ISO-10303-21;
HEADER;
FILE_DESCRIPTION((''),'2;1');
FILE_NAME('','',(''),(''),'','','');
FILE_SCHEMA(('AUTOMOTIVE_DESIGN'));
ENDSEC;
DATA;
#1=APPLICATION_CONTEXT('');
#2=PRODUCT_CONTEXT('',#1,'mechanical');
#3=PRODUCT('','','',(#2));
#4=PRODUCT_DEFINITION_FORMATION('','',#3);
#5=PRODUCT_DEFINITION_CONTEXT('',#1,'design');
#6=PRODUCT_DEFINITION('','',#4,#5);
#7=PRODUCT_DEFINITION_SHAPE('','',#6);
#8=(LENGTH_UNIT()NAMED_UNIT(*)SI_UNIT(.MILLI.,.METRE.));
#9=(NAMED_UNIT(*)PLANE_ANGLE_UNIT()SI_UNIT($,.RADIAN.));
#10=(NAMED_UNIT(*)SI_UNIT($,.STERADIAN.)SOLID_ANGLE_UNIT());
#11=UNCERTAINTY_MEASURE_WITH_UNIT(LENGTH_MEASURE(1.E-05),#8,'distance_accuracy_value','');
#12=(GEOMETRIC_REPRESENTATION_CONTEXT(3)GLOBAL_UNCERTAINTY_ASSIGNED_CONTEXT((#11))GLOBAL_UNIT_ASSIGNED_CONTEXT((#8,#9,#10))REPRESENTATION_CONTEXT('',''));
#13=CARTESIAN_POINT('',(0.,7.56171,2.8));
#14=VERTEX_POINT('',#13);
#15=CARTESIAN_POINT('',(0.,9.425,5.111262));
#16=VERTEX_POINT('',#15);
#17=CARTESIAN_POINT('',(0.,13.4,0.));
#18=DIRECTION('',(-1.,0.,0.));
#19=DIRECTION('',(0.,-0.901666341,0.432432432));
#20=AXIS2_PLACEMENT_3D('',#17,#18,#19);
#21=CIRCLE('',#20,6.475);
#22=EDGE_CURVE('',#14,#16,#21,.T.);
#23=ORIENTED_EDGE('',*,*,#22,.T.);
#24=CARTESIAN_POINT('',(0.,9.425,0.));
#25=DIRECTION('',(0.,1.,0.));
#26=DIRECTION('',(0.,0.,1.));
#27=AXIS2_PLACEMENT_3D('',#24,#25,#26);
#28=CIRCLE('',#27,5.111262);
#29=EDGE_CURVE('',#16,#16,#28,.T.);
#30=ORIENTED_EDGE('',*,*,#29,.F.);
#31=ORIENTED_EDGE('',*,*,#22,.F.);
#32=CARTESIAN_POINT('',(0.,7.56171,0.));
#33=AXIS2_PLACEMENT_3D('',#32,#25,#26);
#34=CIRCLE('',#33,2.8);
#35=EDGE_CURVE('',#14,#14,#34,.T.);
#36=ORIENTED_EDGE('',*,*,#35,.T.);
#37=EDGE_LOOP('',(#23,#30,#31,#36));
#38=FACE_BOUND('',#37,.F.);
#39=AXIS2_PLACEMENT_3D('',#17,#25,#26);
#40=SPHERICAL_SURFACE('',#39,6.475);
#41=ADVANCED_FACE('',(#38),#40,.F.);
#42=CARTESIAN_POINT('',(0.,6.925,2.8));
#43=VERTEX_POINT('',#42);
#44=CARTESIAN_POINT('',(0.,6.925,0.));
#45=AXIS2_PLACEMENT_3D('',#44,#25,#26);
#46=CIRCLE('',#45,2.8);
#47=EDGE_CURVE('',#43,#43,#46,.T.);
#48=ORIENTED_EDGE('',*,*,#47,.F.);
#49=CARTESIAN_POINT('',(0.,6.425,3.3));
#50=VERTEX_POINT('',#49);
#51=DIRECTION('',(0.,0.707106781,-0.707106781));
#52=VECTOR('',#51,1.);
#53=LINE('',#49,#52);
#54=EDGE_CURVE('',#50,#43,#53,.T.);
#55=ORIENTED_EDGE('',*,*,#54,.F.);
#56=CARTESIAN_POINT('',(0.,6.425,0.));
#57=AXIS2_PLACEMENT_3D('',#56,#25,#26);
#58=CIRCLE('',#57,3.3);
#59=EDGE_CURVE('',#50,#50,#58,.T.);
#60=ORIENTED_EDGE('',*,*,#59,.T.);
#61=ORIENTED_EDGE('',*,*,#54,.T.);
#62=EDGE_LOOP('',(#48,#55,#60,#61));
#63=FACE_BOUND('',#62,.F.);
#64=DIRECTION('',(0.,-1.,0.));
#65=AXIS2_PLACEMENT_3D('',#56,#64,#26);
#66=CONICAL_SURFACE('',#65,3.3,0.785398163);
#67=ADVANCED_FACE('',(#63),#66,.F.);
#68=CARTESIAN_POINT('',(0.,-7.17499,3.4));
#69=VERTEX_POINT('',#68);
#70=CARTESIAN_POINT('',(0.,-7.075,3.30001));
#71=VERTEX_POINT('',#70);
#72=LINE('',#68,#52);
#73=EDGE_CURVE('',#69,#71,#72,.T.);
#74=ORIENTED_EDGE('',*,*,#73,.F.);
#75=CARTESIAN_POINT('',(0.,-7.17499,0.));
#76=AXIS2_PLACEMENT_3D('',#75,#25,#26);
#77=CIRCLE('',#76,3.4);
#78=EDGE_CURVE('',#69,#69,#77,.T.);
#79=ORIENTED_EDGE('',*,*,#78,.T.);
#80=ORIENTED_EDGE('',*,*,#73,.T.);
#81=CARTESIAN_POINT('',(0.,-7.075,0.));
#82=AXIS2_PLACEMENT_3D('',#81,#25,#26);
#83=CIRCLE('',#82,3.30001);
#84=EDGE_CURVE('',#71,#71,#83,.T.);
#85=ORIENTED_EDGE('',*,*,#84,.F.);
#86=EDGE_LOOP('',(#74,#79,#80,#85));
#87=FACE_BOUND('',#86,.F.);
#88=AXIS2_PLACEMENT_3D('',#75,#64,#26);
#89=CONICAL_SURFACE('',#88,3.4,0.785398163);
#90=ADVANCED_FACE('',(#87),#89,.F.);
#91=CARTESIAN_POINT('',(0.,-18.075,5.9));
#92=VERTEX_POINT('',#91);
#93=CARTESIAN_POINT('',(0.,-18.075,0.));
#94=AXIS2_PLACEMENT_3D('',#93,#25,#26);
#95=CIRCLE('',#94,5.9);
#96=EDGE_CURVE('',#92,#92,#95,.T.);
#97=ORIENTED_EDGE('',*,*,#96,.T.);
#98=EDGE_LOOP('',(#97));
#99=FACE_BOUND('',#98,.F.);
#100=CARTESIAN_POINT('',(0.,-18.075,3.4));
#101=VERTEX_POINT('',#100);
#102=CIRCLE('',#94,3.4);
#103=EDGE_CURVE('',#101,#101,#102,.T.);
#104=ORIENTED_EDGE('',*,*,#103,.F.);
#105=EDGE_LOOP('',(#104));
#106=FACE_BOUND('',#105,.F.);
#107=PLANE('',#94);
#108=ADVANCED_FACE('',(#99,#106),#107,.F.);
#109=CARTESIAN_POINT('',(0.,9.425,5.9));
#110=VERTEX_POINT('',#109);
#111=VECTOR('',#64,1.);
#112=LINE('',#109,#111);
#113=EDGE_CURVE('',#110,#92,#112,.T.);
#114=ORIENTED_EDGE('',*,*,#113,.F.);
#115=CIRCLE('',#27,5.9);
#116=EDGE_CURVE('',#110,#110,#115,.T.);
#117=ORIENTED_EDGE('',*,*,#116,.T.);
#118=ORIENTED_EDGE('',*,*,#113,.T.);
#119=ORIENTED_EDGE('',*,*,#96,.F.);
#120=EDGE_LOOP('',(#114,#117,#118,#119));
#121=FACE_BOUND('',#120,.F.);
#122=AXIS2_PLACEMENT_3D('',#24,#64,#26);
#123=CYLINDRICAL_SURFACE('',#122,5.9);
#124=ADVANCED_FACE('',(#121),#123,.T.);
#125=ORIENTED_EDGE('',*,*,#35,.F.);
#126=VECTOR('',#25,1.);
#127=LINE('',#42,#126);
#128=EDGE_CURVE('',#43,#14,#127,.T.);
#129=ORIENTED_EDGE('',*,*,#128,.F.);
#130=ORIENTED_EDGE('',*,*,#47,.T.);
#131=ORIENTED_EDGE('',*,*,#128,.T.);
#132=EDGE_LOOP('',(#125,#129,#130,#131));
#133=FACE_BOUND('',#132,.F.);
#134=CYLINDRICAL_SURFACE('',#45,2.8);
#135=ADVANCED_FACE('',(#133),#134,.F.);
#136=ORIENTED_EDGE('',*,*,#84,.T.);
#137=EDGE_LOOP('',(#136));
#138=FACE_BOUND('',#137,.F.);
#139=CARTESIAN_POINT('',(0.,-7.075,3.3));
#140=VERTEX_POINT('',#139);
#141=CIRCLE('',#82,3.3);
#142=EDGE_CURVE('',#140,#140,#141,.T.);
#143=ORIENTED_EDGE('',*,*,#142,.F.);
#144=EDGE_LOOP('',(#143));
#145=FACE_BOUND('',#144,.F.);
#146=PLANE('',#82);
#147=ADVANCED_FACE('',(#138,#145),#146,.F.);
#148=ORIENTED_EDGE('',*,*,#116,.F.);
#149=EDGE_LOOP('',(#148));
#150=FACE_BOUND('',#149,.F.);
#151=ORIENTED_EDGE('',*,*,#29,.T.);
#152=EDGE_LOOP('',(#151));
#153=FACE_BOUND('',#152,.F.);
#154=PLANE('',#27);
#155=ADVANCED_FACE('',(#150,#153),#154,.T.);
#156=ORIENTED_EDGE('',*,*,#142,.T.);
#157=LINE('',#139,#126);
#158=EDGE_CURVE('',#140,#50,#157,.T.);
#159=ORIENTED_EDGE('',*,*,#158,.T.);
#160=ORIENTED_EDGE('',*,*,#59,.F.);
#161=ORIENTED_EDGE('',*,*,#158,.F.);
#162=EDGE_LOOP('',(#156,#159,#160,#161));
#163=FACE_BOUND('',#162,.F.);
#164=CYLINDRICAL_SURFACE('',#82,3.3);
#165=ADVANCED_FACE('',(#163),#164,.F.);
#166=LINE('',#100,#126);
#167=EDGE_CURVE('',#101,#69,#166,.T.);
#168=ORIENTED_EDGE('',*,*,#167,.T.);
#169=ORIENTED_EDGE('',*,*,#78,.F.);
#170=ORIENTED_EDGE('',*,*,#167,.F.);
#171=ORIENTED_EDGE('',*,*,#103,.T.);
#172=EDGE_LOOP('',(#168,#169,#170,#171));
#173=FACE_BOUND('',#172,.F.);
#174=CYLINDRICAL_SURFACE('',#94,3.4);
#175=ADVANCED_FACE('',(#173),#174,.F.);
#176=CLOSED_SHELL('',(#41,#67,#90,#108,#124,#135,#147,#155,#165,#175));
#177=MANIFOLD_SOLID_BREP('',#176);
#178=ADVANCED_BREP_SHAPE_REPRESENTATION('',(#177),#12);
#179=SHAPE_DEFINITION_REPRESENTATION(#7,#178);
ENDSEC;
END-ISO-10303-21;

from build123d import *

# Parameters (mm, degrees)
F2_SIZE = 0.09999


# Not quite as in the source:
# - a fillet or chamfer is up to 0.001 mm smaller than in the source, because OpenCascade refuses the exact size


with BuildPart() as f1:
    # F0 (on Right) → F1 (revolve)
    with BuildSketch(Plane.YZ):
        with BuildLine():
            ThreePointArc((7.5617104388, 2.8), (8.3591026496, 4.0638625595), (9.425, 5.1112620751))
            Line((9.425, 5.1112620751), (9.425, 5.9))
            Line((9.425, 5.9), (-18.075, 5.9))
            Line((-18.075, 5.9), (-18.075, 3.4))
            Line((-18.075, 3.4), (-7.075, 3.4))
            Line((-7.075, 3.4), (-7.075, 3.3))
            Line((-7.075, 3.3), (-6.425, 3.3))
            Line((-6.425, 3.3), (6.425, 3.3))
            Line((6.425, 3.3), (6.925, 3.3))
            Line((6.925, 3.3), (6.925, 2.8))
            Line((6.925, 2.8), (7.5617104388, 2.8))
        make_face()
        Polygon((6.425, 3.3), (6.925, 2.8), (6.925, 3.3), align=None)
    revolve(axis=Axis((0, 1.2174843578, 0), (0, 1, 0)))

    # F2 (size 0.1 in the source; OpenCascade refuses exactly that, so slightly less here)
    f2_edges = [f1.edges().sort_by_distance(p)[0] for p in [
        (0, -7.075, -3.4),
    ]]
    chamfer(f2_edges, length=F2_SIZE)


solid = f1.part
